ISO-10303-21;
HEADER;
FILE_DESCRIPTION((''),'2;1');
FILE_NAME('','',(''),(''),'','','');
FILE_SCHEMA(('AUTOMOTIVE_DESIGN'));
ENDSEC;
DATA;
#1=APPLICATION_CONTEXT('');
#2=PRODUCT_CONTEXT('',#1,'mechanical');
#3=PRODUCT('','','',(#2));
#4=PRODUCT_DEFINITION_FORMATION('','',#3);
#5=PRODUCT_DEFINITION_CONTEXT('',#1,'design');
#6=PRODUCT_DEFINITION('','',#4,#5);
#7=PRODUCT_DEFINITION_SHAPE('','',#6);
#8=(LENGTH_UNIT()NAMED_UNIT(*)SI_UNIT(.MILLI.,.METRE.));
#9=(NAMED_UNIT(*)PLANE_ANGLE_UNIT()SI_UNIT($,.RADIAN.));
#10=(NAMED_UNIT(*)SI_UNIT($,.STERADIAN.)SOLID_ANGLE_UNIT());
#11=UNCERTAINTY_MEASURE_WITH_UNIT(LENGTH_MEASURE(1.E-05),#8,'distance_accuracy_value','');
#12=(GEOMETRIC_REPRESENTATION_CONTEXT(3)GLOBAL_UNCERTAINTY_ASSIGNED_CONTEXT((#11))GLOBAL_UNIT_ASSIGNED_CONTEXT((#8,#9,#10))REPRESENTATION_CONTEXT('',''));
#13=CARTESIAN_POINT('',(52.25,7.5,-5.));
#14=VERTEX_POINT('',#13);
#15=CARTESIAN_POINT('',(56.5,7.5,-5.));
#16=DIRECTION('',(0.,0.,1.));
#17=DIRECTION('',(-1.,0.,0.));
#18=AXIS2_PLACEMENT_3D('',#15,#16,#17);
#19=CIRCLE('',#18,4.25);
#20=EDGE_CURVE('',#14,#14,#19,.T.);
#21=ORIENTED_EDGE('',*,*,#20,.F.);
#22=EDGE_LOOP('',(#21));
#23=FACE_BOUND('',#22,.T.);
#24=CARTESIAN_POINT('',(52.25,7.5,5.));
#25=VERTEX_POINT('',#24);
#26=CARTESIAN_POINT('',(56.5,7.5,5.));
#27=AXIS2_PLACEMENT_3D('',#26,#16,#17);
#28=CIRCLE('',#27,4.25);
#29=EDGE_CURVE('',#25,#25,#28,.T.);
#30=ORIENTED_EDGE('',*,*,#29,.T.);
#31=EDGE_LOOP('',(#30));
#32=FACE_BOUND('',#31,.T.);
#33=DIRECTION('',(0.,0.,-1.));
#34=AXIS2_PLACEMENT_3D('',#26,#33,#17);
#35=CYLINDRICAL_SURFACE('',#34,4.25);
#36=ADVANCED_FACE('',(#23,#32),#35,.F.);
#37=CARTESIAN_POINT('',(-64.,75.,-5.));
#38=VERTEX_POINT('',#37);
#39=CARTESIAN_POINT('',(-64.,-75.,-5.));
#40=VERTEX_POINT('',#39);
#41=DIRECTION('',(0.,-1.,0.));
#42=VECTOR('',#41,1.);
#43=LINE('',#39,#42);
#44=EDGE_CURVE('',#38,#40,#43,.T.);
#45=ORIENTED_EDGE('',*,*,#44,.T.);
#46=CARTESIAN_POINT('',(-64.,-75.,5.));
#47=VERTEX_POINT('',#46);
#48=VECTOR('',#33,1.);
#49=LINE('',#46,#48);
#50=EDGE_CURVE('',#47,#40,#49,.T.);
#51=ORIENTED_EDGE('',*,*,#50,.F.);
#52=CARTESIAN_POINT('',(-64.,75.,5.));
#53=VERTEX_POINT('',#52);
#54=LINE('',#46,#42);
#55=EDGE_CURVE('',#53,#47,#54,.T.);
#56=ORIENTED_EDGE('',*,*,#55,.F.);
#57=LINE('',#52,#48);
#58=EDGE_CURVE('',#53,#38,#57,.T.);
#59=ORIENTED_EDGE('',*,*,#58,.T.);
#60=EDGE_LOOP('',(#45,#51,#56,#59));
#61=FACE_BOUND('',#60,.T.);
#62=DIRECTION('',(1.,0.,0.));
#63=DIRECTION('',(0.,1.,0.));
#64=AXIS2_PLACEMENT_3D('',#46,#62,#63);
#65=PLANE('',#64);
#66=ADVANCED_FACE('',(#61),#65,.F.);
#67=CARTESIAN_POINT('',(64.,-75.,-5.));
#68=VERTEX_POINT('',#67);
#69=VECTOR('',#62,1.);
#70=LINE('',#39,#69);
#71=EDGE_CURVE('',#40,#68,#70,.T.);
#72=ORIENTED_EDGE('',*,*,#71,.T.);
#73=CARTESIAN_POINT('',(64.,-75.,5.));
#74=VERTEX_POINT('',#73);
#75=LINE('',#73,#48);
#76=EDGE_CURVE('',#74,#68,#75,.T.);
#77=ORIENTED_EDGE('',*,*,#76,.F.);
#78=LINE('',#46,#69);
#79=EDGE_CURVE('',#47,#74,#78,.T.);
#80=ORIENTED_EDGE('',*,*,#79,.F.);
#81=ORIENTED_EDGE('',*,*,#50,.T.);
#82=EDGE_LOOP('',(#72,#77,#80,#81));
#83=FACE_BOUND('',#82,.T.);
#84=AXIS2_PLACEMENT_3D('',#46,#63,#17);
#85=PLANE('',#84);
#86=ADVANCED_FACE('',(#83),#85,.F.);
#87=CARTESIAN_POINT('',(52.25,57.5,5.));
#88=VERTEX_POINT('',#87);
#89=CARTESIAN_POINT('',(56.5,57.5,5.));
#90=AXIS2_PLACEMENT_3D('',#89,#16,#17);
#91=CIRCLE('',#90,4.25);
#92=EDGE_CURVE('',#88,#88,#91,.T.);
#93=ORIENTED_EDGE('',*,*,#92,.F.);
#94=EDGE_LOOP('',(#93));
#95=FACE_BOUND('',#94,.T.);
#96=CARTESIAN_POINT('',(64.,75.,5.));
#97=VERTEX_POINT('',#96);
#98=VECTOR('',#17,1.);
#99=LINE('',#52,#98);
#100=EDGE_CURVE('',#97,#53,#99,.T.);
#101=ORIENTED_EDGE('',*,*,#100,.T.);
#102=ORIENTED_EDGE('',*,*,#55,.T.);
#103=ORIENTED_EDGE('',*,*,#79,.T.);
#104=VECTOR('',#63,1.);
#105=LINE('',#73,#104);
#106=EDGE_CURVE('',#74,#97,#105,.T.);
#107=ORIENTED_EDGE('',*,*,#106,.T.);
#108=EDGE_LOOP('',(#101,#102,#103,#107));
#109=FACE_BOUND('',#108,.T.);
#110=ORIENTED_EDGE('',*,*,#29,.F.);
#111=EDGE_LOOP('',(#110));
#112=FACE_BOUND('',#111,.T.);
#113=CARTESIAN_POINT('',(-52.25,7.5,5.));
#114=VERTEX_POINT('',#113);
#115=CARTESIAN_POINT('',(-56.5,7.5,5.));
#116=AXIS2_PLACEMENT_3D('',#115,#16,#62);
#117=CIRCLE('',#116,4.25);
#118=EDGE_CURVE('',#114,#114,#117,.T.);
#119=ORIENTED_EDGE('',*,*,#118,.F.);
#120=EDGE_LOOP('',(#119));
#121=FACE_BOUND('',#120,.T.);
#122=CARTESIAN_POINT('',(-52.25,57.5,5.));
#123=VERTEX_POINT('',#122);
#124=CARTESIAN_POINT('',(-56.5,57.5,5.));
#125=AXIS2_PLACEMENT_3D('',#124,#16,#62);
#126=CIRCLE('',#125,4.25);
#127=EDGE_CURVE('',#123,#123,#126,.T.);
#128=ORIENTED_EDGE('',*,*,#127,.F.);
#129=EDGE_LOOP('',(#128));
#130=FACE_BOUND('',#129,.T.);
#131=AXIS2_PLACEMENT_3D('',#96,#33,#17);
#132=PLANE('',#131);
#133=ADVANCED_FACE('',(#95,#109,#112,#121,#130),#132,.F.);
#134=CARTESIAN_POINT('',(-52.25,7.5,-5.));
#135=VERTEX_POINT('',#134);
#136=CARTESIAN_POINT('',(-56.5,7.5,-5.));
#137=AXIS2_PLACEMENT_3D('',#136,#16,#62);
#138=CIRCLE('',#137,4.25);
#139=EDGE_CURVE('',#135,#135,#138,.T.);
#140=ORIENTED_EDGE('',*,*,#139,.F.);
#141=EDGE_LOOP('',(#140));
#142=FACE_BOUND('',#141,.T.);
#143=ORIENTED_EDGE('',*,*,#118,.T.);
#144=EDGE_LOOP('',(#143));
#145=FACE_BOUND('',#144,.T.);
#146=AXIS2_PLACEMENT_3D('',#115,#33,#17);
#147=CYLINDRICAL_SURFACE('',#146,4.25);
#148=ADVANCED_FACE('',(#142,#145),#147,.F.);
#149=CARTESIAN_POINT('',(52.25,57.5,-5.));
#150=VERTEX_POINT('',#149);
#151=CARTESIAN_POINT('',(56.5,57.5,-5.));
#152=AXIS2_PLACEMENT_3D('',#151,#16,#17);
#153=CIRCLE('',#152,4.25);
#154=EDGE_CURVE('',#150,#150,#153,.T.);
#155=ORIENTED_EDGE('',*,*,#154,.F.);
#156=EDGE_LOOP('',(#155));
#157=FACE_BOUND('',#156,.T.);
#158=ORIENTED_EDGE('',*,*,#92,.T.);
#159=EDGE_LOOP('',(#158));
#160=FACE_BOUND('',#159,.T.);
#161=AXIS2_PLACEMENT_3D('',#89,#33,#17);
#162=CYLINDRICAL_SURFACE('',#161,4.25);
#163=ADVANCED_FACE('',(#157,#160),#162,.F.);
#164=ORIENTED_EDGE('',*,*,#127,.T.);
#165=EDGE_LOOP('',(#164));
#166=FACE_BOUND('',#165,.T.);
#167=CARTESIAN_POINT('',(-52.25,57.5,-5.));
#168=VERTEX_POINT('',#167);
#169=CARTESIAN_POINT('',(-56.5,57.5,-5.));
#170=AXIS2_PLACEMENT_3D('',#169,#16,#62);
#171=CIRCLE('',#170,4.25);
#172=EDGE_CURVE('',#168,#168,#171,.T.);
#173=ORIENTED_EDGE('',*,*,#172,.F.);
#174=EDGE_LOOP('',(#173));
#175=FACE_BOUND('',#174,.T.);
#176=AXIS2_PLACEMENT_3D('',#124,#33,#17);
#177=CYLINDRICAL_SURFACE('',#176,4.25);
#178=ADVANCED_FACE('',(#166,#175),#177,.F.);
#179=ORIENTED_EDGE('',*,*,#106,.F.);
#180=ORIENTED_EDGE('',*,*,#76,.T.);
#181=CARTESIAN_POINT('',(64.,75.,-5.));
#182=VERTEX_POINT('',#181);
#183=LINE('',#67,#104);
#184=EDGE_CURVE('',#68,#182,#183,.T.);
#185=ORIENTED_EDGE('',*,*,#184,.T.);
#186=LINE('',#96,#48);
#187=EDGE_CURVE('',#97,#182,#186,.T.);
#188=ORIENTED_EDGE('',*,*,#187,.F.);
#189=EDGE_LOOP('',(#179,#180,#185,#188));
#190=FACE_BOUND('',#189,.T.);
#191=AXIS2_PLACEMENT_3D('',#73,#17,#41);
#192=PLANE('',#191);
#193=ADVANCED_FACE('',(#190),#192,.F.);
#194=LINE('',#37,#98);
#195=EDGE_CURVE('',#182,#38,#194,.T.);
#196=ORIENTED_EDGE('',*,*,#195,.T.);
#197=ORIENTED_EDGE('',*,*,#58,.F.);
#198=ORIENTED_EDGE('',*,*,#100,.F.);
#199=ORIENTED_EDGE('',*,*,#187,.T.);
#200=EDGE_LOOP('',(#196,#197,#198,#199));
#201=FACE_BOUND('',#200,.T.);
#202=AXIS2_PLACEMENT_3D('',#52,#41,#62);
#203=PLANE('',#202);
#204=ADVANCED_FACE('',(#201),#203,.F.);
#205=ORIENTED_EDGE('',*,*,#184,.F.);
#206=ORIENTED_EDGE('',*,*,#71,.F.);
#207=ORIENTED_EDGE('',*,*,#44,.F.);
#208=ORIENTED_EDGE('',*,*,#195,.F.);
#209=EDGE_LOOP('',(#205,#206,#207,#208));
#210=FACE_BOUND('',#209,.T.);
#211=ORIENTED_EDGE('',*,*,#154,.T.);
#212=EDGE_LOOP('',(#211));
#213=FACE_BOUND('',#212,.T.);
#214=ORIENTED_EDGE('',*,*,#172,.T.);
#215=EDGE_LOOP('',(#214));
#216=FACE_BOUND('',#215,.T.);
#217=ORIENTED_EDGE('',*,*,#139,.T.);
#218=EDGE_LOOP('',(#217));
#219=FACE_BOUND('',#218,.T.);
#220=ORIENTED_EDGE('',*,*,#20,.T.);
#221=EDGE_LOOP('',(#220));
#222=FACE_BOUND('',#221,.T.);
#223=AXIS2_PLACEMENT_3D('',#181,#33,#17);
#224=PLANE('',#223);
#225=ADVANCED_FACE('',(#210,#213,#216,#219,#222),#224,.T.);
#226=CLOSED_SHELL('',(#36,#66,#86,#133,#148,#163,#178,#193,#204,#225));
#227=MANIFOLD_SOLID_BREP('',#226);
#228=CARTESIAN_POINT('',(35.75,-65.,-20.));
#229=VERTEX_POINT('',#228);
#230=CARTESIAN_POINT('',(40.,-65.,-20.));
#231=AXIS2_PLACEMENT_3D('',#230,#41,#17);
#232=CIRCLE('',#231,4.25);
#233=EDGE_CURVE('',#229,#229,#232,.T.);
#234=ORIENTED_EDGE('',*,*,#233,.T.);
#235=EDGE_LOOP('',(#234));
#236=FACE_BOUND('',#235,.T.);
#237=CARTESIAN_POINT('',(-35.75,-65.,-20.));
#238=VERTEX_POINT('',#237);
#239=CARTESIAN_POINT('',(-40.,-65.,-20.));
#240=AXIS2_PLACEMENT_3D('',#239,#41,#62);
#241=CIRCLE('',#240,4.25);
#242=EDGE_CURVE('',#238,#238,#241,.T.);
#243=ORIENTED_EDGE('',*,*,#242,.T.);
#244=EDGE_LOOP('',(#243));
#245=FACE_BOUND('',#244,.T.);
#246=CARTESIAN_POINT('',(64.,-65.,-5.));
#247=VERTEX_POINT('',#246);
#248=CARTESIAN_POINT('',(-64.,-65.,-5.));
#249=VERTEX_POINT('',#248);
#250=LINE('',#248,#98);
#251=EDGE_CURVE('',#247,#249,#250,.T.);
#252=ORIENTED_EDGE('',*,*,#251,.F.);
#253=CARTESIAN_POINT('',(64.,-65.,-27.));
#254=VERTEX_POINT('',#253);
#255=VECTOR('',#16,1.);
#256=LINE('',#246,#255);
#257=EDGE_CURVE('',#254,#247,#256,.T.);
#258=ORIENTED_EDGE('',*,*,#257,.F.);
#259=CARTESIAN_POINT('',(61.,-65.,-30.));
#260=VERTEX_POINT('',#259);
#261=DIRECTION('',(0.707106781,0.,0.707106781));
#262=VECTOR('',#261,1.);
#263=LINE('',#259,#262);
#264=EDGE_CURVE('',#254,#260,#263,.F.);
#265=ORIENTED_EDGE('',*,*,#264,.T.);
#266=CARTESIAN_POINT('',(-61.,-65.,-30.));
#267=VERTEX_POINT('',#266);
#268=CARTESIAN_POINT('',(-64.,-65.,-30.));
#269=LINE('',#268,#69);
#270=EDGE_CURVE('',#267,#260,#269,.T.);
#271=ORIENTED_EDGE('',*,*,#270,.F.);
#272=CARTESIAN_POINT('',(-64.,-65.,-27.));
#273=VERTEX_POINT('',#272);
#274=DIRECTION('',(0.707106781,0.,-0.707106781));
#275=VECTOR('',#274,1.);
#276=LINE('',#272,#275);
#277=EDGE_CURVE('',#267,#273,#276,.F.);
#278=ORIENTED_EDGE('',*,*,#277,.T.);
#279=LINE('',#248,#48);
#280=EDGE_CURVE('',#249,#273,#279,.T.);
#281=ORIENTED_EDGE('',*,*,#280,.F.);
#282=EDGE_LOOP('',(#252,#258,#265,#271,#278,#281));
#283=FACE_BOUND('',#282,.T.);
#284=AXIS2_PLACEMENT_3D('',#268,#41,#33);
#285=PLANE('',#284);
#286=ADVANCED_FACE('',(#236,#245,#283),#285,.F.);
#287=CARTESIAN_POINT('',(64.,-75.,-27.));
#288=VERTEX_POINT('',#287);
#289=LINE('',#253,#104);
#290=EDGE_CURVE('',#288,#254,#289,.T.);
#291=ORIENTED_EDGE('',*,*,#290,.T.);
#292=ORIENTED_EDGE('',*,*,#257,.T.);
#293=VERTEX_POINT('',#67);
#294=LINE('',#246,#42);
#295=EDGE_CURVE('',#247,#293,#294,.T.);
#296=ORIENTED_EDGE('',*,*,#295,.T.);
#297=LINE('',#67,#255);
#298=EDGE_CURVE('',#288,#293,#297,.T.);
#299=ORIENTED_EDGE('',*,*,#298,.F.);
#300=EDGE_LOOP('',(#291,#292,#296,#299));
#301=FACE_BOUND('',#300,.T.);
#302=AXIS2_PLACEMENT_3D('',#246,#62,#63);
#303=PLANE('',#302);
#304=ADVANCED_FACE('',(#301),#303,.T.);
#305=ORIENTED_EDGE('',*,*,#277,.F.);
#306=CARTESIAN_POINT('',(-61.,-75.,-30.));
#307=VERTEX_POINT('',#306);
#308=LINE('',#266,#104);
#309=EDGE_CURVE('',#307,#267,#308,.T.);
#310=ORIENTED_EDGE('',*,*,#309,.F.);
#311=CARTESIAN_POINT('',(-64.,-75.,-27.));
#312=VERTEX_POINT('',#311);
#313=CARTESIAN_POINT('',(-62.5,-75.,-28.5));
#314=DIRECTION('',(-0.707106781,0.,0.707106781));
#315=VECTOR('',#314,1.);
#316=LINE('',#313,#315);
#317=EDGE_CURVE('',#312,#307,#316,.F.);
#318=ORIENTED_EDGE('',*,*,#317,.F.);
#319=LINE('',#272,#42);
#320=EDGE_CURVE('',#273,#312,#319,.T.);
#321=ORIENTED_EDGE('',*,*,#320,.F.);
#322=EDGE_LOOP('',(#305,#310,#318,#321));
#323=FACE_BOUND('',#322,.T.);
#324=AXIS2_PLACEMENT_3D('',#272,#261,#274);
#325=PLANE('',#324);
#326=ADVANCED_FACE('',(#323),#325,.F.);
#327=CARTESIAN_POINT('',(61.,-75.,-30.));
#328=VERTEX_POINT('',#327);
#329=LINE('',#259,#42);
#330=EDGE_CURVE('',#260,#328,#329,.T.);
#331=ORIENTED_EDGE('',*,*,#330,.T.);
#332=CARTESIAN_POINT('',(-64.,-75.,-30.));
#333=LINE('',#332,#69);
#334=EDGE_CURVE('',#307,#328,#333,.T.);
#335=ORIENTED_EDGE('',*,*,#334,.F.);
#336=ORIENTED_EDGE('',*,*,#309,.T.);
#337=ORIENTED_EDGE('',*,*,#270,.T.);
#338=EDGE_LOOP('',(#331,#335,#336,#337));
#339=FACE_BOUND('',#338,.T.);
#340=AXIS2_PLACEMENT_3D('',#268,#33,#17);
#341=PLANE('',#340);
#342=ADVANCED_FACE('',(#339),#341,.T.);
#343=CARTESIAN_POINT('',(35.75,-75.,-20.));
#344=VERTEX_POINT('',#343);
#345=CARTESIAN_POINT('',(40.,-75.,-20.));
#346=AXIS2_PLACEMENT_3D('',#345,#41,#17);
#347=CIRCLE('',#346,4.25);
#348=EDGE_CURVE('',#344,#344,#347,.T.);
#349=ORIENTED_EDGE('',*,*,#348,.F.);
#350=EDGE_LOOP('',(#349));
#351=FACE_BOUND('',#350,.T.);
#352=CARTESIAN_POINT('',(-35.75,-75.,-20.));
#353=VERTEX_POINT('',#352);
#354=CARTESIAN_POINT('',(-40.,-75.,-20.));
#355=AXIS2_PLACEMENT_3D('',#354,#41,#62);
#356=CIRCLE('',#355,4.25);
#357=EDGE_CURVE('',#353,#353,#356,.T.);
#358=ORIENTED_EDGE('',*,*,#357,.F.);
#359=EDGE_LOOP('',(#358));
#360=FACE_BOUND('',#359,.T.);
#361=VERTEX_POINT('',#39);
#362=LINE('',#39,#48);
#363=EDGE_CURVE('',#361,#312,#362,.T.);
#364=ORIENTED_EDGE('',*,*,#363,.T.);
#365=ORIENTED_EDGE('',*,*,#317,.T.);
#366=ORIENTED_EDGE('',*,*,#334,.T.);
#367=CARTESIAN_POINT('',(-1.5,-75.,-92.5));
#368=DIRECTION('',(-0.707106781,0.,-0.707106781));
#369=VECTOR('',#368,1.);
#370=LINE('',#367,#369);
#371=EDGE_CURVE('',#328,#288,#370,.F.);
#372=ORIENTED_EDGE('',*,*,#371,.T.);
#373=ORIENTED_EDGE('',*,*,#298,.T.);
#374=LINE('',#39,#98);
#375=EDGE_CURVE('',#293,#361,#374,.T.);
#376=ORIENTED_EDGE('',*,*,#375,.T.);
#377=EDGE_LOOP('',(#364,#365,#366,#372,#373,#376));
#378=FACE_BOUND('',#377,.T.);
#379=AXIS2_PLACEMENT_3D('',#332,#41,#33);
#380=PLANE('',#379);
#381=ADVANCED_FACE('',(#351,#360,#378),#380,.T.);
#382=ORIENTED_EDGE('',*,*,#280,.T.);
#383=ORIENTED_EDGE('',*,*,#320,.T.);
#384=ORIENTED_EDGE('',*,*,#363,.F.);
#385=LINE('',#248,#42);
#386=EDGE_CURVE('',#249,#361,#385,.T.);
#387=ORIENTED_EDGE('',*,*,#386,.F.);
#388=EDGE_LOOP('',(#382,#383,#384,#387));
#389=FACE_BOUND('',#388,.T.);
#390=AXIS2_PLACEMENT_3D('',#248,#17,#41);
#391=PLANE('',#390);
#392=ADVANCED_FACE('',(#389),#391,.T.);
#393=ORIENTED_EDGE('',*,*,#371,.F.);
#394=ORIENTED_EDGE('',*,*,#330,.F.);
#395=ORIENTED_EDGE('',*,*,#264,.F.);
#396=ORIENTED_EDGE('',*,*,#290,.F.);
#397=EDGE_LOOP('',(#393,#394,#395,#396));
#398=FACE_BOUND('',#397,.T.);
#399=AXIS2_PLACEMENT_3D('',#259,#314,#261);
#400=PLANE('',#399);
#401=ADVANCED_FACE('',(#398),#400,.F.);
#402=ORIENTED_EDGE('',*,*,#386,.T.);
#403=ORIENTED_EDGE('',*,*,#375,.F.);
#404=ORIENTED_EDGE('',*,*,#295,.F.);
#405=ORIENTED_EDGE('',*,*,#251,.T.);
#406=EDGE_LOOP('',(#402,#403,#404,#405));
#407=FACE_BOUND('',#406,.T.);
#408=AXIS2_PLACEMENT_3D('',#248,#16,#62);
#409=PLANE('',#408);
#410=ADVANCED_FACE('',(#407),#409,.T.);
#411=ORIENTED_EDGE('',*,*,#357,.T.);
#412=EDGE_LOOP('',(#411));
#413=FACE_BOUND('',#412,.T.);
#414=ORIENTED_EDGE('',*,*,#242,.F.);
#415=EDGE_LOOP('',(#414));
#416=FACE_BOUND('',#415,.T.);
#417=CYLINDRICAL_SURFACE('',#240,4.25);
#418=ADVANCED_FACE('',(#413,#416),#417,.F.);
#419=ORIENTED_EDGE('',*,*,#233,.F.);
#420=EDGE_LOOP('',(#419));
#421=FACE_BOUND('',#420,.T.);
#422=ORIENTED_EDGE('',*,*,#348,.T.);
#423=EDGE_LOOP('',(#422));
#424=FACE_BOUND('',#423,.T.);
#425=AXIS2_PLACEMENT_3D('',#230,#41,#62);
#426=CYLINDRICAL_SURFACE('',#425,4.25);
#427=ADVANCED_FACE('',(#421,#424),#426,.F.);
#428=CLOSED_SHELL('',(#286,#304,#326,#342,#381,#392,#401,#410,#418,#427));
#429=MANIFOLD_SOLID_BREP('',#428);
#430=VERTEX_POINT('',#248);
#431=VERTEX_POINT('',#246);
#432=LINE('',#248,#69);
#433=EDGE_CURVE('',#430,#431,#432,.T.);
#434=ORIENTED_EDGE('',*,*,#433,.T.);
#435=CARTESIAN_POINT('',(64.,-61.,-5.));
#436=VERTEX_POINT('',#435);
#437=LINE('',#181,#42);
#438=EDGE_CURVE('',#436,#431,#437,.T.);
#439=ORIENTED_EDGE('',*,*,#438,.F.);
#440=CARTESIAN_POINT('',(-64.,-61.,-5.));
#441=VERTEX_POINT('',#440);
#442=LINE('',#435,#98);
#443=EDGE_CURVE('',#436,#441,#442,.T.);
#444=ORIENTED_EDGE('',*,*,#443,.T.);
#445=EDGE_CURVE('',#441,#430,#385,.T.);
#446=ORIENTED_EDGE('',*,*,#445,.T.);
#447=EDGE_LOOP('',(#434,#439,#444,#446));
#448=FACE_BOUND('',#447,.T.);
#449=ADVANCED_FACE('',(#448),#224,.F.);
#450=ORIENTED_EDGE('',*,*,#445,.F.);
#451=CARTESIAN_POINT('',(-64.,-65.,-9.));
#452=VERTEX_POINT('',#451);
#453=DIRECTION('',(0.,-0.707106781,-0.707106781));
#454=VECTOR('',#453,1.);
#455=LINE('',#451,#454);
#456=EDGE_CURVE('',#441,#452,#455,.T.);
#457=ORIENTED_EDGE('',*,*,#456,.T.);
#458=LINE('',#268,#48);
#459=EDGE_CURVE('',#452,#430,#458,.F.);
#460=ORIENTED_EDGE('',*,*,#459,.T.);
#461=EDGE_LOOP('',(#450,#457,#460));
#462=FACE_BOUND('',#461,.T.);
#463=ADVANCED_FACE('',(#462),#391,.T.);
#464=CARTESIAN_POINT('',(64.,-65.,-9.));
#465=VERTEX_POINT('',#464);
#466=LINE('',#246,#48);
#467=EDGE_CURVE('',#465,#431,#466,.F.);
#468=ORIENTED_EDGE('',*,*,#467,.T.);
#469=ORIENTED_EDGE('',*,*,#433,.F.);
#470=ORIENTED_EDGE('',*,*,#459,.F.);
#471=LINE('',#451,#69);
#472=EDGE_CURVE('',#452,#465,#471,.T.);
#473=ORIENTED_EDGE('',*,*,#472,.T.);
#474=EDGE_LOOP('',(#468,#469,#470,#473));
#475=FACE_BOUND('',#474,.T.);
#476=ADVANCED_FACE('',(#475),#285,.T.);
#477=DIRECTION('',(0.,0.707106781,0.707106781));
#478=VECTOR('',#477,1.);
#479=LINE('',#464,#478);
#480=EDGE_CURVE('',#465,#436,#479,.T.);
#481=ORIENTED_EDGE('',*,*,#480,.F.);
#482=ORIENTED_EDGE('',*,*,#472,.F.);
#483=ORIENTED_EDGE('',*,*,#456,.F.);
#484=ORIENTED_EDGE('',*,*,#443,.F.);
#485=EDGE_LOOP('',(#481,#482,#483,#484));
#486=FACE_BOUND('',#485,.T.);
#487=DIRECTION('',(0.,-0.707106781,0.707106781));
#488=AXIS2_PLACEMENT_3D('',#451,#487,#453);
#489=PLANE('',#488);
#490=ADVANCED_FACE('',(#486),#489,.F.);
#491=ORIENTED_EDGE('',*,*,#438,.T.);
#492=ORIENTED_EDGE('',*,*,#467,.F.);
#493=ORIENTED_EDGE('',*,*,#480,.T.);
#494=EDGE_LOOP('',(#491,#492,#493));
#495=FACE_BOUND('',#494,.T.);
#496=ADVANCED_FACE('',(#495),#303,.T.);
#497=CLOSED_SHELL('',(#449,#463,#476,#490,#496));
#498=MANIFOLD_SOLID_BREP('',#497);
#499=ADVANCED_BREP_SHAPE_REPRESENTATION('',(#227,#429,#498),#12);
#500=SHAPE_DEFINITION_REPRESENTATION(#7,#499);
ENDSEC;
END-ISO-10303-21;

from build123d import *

# Parameters (mm, degrees)
SKETCH1_W           = 128
SKETCH1_H           = 150
SKETCH1_R           = 4.25
BOSS_EXTRUDE1_DEPTH = 5
SKETCH2_W           = 128
SKETCH2_H           = 25
SKETCH2_R           = 4.25
BOSS_EXTRUDE2_DEPTH = 10
FILLET_START        = -64
FILLET_BEAD1_DEPTH  = 128
CHAMFER1_SIZE       = 3


# Read off the part's stored shape, not the designer's step: Fillet Bead1
with BuildPart() as part:
    # Sketch1 → Boss-Extrude1 (new, symmetric)
    with BuildSketch(Plane.XY):
        Rectangle(SKETCH1_W, SKETCH1_H)
        with Locations((-56.5, 57.5)):
            Circle(SKETCH1_R, mode=Mode.SUBTRACT)
        with Locations((-56.5, 7.5)):
            Circle(SKETCH1_R, mode=Mode.SUBTRACT)
        with Locations(Location((56.5, 7.5, 0), (0, 0, 180))):
            Circle(SKETCH1_R, mode=Mode.SUBTRACT)
        with Locations(Location((56.5, 57.5, 0), (0, 0, 180))):
            Circle(SKETCH1_R, mode=Mode.SUBTRACT)
    extrude(amount=BOSS_EXTRUDE1_DEPTH, both=True)


with BuildPart() as body_2:
    # Sketch2 → Boss-Extrude2 (new body)
    with BuildSketch(Plane.XZ.offset(75)):
        with Locations((0, -17.5)):
            Rectangle(SKETCH2_W, SKETCH2_H)
        with Locations((-40, -20)):
            Circle(SKETCH2_R, mode=Mode.SUBTRACT)
        with Locations(Location((40, -20, 0), (0, 0, 180))):
            Circle(SKETCH2_R, mode=Mode.SUBTRACT)
    extrude(amount=-BOSS_EXTRUDE2_DEPTH)

    # Chamfer1
    chamfer1_edges = [body_2.edges().sort_by_distance(p)[0] for p in [
        (64, -70, -30),
        (-64, -70, -30),
    ]]
    chamfer(chamfer1_edges, length=CHAMFER1_SIZE)


with BuildPart() as body_3:
    # Fillet Bead1 outline → Fillet Bead1 (new body)
    with BuildSketch(Plane.YZ.offset(FILLET_START)):
        Polygon((-65, -9), (-61, -5), (-65, -5), align=None)
    extrude(amount=FILLET_BEAD1_DEPTH)


solid = Compound([part.part, body_2.part, body_3.part])
